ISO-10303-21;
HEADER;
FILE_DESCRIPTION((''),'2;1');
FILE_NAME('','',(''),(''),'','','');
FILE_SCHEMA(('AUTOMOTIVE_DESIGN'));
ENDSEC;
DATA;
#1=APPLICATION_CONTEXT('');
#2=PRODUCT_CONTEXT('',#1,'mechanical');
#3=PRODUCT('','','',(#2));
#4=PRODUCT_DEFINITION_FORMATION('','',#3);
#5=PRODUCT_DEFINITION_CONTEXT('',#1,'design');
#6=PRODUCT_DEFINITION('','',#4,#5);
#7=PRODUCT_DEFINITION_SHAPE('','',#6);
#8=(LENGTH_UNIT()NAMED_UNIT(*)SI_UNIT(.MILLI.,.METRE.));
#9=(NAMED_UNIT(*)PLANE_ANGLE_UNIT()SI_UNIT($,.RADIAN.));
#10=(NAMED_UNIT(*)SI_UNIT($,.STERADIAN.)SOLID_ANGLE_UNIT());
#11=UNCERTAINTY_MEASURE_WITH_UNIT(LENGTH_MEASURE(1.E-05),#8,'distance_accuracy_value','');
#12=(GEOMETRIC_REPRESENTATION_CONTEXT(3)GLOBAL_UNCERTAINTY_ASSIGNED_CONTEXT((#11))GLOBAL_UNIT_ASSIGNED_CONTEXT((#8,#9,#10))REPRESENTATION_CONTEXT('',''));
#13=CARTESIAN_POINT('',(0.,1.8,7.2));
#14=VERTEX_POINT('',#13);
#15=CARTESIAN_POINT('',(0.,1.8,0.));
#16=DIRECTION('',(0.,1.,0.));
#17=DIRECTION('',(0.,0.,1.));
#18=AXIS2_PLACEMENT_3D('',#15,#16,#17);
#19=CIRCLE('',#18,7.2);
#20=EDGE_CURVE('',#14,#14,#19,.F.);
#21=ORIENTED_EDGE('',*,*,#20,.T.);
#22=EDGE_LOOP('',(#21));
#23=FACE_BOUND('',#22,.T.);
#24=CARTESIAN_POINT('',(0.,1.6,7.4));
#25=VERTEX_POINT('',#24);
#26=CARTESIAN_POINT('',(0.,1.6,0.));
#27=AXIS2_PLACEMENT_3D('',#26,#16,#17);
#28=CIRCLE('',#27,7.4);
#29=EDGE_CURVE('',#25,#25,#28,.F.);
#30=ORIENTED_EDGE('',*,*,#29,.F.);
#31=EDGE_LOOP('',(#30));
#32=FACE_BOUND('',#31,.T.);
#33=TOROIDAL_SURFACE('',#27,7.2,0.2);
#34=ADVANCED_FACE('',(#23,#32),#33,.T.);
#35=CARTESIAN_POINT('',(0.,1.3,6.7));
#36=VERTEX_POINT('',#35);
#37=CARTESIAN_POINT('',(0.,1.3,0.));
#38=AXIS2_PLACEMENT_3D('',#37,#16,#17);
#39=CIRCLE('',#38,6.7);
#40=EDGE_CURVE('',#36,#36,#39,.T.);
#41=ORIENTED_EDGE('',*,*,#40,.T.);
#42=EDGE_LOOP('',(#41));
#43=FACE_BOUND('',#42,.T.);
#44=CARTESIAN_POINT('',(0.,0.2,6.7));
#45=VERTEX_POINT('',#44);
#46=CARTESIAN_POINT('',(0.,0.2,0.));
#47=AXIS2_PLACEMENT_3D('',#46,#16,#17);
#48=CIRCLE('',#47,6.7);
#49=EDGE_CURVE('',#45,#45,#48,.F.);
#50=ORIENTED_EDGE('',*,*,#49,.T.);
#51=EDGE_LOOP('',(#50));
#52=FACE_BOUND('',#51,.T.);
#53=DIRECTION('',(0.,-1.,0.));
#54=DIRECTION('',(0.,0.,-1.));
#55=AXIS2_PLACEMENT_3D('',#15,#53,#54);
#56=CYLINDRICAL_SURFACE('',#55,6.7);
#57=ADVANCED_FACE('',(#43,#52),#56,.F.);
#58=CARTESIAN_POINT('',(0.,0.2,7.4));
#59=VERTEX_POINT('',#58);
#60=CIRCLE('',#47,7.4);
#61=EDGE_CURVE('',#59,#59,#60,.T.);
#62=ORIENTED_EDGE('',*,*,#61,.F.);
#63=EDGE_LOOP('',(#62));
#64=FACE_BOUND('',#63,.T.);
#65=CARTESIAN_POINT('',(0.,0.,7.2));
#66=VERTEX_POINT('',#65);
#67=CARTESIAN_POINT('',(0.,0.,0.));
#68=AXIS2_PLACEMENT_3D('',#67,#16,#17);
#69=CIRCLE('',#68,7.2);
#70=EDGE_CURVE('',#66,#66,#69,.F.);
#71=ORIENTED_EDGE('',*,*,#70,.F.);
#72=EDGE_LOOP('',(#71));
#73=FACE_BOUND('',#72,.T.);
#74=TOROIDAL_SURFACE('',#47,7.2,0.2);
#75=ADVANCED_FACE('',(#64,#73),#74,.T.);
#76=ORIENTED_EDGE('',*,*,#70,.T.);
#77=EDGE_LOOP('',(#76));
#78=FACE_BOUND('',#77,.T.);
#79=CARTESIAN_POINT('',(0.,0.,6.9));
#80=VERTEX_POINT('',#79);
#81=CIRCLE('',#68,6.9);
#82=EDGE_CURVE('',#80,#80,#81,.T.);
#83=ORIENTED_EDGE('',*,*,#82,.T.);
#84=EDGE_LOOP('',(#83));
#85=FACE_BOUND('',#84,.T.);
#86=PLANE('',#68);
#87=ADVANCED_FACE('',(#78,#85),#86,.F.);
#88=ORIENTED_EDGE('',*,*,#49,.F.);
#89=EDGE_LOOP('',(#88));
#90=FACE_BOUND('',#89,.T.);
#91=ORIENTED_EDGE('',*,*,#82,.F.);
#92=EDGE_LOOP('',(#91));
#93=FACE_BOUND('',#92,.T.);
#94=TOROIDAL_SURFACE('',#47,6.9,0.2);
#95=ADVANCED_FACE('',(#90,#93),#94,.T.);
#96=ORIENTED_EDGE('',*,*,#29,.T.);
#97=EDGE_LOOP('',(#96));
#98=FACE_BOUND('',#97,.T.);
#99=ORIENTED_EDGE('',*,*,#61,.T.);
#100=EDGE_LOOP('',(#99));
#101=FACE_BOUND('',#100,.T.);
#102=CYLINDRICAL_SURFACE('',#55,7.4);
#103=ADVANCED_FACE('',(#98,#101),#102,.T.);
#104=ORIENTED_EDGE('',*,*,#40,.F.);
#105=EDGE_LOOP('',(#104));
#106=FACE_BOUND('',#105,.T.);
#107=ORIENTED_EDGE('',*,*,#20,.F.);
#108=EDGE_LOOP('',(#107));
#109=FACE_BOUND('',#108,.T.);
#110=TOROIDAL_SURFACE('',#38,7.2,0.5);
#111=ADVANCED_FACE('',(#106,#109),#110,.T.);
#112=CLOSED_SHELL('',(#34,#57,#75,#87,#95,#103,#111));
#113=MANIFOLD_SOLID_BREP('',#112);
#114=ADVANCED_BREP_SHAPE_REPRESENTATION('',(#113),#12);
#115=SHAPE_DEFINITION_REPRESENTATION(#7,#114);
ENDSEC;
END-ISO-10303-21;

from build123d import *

# Parameters (mm, degrees)
SKETCH1_R           = 7.4
SKETCH1_R_2         = 6.7
BOSS_EXTRUDE1_DEPTH = 1.8
FILLET1_R           = 0.5
FILLET2_R           = 0.2


with BuildPart() as part:
    # Sketch1 → Boss-Extrude1 (new body)
    with BuildSketch(Plane(origin=(0, 0, 0), x_dir=(1, 0, 0), z_dir=(0, 1, 0))):
        with Locations(Location((0, 0, 0), (0, 0, 270))):
            Circle(SKETCH1_R)
        with Locations(Location((0, 0, 0), (0, 0, 270))):
            Circle(SKETCH1_R_2, mode=Mode.SUBTRACT)
    extrude(amount=BOSS_EXTRUDE1_DEPTH)

    # Fillet1
    fillet1_edges = [part.edges().sort_by_distance(p)[0] for p in [
        (0, 1.8, -6.7),
    ]]
    fillet(fillet1_edges, radius=FILLET1_R)

    # Fillet2
    fillet2_edges = [part.edges().sort_by_distance(p)[0] for p in [
        (0, 0, -7.4),
        (0, 1.8, -7.4),
        (0, 0, -6.7),
    ]]
    fillet(fillet2_edges, radius=FILLET2_R - 0.0001)  # a hair under: the kernel refuses the full size


solid = part.part
